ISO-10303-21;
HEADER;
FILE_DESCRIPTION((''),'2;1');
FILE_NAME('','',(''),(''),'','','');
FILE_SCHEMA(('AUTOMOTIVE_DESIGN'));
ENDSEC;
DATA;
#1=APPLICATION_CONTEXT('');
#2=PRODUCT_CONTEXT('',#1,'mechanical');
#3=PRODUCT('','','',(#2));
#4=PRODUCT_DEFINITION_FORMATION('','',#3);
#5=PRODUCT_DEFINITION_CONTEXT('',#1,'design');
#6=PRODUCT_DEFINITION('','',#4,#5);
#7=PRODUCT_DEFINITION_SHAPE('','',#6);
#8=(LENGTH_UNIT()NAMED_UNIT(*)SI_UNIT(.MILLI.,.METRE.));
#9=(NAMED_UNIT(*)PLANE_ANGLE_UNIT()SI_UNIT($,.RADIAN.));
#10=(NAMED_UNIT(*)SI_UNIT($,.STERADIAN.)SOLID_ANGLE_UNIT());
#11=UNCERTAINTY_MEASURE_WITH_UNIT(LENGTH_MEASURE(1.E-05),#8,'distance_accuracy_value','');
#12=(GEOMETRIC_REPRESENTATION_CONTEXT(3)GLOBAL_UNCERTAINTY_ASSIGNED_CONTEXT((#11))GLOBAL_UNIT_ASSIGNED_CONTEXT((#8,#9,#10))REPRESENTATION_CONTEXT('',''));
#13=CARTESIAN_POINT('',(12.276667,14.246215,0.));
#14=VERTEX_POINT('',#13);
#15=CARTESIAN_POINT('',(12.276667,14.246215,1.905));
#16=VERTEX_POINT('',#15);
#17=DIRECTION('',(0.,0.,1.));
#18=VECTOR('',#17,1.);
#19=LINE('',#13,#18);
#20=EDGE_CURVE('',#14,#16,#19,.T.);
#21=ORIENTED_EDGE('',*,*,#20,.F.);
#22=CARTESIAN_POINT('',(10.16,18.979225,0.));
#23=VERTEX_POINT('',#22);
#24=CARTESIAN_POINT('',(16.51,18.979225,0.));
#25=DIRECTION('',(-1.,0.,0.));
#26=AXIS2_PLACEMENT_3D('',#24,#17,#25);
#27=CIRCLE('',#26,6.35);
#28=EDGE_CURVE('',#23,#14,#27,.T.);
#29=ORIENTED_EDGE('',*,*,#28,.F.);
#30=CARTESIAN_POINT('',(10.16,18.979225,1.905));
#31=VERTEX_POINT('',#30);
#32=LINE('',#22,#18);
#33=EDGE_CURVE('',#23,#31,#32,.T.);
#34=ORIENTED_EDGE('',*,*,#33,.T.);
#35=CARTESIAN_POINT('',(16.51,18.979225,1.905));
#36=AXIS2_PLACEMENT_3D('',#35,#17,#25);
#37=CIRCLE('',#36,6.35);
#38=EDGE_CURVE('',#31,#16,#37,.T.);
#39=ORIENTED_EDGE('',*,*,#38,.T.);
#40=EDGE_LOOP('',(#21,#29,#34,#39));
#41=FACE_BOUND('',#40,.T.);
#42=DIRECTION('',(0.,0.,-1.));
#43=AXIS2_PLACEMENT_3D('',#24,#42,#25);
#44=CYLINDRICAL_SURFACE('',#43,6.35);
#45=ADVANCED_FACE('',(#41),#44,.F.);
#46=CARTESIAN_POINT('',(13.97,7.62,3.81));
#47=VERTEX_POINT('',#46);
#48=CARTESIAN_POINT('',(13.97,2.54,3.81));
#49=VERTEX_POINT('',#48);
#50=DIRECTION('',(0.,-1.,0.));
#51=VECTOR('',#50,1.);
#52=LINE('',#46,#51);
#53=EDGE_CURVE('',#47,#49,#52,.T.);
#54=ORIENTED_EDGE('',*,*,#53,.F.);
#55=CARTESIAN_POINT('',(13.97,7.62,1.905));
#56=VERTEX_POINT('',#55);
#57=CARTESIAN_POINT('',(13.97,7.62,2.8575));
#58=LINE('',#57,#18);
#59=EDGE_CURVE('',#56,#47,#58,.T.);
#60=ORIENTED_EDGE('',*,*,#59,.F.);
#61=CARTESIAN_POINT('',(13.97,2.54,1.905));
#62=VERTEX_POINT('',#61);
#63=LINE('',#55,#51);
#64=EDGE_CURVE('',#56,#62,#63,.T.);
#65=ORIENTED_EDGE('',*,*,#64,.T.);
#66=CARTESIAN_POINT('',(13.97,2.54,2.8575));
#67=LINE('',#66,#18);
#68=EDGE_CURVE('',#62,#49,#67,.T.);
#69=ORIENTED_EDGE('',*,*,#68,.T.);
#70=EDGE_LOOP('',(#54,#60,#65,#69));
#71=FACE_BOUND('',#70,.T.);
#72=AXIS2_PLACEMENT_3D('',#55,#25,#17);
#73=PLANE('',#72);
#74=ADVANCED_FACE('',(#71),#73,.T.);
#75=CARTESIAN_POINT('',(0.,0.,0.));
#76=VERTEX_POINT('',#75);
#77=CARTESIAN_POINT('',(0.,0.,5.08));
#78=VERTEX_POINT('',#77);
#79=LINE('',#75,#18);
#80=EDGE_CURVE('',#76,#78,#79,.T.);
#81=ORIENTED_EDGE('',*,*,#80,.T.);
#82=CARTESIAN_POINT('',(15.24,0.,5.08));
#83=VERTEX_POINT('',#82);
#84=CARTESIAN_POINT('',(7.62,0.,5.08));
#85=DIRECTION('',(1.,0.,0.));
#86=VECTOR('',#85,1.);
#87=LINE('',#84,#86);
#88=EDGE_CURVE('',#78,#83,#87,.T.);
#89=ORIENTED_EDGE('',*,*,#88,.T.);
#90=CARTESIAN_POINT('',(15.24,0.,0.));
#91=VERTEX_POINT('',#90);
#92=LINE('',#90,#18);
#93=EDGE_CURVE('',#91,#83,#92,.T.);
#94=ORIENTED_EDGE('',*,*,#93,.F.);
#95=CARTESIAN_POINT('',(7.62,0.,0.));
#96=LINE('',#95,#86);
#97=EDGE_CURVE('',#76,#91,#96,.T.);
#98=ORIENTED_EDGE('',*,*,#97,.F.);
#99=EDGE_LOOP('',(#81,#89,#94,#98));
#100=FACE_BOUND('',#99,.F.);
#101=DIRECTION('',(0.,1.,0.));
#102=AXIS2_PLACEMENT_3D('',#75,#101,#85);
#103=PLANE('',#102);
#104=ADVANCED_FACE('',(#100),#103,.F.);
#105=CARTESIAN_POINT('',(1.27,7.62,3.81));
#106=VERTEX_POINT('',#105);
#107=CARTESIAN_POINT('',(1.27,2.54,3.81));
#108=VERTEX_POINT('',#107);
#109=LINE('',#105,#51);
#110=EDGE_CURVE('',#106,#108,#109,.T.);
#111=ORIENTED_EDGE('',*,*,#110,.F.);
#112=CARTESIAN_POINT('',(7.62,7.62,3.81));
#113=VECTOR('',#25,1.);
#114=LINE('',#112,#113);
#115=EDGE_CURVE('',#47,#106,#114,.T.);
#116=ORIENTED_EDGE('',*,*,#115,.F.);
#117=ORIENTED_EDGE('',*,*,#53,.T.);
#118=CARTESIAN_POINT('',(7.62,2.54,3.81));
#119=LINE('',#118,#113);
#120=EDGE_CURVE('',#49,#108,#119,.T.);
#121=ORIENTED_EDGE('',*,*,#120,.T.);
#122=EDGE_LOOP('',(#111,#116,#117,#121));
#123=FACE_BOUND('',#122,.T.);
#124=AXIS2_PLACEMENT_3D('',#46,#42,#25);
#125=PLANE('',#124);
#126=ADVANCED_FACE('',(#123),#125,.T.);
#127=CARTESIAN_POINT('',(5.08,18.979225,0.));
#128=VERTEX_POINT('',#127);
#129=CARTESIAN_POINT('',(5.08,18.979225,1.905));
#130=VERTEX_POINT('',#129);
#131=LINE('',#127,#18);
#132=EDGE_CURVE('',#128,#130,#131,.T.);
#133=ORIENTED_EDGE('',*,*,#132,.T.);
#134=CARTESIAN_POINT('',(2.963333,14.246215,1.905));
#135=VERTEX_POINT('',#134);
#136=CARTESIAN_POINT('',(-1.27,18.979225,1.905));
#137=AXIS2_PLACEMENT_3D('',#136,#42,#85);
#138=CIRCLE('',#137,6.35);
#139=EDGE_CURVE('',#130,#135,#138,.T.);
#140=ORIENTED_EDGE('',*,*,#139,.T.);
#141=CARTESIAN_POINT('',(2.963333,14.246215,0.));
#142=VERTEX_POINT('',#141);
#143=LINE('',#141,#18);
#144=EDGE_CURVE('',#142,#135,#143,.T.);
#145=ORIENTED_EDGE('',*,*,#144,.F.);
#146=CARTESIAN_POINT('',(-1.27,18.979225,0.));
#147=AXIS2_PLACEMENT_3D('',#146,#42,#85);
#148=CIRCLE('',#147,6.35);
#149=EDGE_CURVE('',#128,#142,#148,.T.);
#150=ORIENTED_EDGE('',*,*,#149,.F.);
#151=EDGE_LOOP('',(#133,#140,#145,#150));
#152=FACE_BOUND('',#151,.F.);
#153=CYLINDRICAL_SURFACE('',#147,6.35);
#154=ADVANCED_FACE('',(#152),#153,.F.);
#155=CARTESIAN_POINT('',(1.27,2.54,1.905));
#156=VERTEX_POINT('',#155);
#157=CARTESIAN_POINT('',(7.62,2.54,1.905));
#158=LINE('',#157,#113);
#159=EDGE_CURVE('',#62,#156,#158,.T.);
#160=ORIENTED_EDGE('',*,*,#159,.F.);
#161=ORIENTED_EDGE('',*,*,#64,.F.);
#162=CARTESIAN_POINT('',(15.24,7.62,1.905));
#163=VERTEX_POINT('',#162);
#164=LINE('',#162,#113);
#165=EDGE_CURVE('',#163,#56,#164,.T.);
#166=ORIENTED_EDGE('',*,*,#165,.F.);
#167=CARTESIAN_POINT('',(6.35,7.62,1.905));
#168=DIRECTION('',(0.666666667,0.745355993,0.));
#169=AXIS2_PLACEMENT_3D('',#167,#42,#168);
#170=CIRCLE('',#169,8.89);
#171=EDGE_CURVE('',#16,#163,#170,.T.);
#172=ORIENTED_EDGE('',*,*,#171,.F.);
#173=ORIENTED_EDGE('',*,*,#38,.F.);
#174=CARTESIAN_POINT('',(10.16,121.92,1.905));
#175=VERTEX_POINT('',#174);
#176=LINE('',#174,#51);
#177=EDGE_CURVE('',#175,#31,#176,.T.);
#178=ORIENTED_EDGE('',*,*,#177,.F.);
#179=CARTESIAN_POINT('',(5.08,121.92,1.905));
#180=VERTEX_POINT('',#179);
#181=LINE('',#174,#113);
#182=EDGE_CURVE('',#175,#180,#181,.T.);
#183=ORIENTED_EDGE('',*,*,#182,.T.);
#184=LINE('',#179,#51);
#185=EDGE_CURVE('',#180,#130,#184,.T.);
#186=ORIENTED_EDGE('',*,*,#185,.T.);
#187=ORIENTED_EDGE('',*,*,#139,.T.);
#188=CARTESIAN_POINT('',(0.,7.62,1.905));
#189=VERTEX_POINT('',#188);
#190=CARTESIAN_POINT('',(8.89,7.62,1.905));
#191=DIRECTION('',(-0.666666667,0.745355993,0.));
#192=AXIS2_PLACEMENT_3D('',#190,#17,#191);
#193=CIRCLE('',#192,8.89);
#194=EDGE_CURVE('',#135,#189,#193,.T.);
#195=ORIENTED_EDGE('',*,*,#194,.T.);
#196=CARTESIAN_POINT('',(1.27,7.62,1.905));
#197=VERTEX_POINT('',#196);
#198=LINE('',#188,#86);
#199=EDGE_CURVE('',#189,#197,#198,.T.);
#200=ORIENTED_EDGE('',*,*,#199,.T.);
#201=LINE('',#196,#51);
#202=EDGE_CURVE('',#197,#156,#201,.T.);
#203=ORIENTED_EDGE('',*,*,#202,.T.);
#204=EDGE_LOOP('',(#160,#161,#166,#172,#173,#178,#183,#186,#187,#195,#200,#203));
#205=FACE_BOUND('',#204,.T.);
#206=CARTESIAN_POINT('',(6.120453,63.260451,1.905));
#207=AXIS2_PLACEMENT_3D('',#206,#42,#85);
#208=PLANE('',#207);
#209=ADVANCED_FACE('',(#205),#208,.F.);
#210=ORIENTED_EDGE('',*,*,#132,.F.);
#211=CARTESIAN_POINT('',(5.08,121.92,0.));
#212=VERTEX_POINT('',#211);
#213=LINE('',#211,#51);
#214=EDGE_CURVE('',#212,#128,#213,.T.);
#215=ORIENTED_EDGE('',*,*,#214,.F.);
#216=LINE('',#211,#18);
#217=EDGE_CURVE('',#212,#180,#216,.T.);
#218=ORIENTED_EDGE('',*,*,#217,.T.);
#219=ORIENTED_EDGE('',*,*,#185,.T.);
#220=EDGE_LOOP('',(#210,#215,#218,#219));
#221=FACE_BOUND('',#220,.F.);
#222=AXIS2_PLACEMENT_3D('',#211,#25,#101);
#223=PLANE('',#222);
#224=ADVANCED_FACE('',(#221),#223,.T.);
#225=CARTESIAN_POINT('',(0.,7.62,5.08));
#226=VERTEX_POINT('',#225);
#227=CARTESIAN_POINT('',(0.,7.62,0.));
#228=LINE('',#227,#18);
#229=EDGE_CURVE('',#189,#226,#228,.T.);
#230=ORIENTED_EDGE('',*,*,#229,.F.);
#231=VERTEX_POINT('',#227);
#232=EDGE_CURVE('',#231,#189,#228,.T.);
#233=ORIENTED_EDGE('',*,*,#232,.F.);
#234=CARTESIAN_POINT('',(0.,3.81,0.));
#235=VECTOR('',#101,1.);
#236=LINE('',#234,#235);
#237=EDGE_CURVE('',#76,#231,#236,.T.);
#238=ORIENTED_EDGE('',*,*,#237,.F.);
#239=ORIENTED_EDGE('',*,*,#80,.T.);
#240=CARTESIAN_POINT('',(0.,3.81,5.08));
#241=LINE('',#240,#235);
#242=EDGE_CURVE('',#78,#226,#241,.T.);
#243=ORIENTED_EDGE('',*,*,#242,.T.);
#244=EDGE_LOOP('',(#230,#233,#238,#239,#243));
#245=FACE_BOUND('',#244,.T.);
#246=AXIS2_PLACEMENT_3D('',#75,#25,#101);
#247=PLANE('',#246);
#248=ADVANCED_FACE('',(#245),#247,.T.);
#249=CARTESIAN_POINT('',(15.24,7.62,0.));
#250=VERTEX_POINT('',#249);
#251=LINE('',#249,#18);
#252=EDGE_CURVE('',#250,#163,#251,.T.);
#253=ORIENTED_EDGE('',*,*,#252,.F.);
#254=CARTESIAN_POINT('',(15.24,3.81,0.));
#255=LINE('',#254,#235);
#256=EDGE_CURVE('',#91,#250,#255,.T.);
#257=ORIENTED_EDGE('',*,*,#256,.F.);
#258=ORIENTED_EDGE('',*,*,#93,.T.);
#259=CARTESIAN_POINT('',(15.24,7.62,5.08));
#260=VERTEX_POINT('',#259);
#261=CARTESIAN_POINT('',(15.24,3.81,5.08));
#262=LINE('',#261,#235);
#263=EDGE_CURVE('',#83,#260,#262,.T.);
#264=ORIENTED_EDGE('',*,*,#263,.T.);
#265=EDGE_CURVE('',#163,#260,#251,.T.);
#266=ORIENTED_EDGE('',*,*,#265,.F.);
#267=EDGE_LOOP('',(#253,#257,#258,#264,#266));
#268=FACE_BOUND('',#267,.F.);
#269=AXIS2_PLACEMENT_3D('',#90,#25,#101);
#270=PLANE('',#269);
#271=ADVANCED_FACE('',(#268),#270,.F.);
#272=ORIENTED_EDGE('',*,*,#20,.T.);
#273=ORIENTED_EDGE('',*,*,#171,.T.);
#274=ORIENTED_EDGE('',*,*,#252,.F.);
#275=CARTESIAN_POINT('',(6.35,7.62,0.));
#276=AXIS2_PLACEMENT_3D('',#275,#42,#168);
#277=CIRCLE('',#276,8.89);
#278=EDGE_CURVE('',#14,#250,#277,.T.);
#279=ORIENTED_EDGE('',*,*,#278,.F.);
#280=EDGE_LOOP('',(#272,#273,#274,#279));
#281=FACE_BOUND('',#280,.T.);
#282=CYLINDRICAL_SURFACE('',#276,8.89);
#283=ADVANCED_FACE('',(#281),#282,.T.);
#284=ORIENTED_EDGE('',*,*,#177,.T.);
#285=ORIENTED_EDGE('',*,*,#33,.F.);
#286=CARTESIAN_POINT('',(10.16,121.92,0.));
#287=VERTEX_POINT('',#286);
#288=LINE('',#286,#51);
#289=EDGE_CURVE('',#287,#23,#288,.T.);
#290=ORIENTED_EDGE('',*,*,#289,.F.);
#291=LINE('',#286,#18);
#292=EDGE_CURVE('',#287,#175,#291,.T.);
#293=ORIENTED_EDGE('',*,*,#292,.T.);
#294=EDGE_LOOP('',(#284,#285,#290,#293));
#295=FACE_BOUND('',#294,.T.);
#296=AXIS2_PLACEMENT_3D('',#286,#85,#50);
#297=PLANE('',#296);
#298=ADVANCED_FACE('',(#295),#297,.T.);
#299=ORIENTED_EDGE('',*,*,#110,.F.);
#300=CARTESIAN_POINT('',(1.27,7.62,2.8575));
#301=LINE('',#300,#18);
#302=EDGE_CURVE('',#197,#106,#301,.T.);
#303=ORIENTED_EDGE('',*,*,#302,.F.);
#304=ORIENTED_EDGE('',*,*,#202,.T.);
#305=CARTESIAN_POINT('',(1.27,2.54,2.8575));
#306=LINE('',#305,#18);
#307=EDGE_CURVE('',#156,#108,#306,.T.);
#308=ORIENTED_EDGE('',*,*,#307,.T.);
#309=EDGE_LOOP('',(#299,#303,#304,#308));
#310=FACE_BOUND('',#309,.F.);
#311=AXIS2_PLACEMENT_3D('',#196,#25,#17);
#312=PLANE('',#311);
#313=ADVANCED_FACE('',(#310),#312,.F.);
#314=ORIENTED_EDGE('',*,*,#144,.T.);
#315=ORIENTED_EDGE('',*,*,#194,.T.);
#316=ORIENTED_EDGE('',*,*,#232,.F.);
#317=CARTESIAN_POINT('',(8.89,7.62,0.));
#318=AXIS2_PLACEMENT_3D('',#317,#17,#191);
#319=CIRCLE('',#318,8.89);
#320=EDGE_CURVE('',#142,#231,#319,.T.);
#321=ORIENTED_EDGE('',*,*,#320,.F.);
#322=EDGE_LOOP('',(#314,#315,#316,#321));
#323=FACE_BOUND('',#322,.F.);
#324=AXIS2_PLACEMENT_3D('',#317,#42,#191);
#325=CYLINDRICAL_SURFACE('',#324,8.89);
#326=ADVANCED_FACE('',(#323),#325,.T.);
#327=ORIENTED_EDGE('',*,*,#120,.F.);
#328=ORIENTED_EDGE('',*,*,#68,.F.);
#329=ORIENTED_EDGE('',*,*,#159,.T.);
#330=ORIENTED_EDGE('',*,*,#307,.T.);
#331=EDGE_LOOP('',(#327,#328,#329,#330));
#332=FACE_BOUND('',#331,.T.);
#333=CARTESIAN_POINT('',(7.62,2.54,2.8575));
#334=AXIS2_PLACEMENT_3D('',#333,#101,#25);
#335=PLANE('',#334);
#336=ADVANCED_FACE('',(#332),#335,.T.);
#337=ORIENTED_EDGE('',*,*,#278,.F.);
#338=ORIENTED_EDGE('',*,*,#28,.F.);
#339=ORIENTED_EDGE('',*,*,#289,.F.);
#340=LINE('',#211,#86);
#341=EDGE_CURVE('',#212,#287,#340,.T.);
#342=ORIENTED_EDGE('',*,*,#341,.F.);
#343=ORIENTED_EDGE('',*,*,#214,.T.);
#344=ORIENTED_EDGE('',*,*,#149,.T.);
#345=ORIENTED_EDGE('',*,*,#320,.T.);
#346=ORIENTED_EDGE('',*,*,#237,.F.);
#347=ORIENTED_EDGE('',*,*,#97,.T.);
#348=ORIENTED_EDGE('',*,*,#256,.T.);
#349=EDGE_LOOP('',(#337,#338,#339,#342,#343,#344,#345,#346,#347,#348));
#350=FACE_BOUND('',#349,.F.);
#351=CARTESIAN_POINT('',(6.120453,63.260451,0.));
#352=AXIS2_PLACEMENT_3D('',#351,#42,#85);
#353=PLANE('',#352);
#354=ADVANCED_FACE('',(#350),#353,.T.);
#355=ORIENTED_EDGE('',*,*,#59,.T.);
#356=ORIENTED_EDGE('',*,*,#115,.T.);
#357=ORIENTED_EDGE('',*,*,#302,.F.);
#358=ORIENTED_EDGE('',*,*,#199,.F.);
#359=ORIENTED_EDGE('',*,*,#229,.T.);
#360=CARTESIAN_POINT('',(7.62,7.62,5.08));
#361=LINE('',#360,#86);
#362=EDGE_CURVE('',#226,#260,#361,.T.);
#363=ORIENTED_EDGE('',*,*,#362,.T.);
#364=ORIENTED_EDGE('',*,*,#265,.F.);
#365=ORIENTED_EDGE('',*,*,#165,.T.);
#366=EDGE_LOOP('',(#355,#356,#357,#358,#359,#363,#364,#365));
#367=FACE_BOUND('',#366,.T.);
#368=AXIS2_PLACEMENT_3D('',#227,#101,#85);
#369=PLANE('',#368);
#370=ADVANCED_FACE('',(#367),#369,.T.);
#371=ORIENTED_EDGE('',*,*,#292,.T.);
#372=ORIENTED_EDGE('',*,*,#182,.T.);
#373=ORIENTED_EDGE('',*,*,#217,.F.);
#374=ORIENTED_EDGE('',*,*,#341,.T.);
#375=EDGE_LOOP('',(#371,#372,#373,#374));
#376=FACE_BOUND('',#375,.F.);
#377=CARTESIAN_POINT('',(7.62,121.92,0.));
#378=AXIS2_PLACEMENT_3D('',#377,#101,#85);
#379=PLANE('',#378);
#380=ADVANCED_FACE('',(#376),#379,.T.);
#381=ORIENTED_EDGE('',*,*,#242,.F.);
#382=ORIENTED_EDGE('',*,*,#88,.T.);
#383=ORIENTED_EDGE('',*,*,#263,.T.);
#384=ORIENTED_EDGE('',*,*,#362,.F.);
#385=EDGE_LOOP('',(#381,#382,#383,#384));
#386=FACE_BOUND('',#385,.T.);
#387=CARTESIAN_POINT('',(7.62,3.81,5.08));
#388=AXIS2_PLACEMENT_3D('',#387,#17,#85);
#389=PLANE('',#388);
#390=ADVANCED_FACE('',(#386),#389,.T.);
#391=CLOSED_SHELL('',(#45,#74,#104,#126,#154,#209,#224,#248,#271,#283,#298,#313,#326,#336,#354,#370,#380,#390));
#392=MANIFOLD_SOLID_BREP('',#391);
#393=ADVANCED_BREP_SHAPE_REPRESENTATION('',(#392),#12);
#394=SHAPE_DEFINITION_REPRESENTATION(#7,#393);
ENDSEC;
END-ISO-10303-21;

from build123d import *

# Parameters (mm, degrees)
F0_W     = 15.24
F0_H     = 7.62
F1_DEPTH = 5.08
F2_W     = 12.7
F2_H     = 1.905
F3_DEPTH = 5.08
F5_DEPTH = 1.905


# Not quite as in the source:
# - a feature names something its author has since deleted; it is built from what else it names


with BuildPart() as f1:
    # F0 (on Top) → F1 (new body)
    with BuildSketch(Plane.XY):
        with Locations((7.62, 3.81)):
            Rectangle(F0_W, F0_H)
    extrude(amount=F1_DEPTH)

    # F2 (on face) → F3 (cut, through all)
    with BuildSketch(Plane(origin=(0, 7.62, 0), x_dir=(-1, 0, 0), z_dir=(0, 1, 0))):
        with Locations((-7.62, 2.8575)):
            Rectangle(F2_W, F2_H)
    extrude(amount=-F3_DEPTH, mode=Mode.SUBTRACT)

    # F4 (on face) → F5 (join, through all)
    with BuildSketch(Plane(origin=(0, 0, 0), x_dir=(1, 0, 0), z_dir=(0, 0, -1))):
        with BuildLine():
            ThreePointArc((10.16, -18.9792253257), (10.7132695997, -16.3868486813), (12.2766666667, -14.2462147733))
            ThreePointArc((12.2766666667, -14.2462147733), (14.4654225604, -11.2493273022), (15.24, -7.62))
            Line((15.24, -7.62), (7.62, -7.62))
            Line((7.62, -7.62), (7.62, -121.92))
            Line((7.62, -121.92), (10.16, -121.92))
            Line((10.16, -121.92), (10.16, -18.9792253257))
        make_face()
    extrude(amount=-F5_DEPTH)

    # F6: F1 across face


with BuildPart() as f1_1:
    add(f1.part)
    add(f1.part.mirror(Plane(origin=(7.62, 64.77, 0.9525), x_dir=(0, -1, 0), z_dir=(-1, 0, 0))))


solid = f1_1.part
